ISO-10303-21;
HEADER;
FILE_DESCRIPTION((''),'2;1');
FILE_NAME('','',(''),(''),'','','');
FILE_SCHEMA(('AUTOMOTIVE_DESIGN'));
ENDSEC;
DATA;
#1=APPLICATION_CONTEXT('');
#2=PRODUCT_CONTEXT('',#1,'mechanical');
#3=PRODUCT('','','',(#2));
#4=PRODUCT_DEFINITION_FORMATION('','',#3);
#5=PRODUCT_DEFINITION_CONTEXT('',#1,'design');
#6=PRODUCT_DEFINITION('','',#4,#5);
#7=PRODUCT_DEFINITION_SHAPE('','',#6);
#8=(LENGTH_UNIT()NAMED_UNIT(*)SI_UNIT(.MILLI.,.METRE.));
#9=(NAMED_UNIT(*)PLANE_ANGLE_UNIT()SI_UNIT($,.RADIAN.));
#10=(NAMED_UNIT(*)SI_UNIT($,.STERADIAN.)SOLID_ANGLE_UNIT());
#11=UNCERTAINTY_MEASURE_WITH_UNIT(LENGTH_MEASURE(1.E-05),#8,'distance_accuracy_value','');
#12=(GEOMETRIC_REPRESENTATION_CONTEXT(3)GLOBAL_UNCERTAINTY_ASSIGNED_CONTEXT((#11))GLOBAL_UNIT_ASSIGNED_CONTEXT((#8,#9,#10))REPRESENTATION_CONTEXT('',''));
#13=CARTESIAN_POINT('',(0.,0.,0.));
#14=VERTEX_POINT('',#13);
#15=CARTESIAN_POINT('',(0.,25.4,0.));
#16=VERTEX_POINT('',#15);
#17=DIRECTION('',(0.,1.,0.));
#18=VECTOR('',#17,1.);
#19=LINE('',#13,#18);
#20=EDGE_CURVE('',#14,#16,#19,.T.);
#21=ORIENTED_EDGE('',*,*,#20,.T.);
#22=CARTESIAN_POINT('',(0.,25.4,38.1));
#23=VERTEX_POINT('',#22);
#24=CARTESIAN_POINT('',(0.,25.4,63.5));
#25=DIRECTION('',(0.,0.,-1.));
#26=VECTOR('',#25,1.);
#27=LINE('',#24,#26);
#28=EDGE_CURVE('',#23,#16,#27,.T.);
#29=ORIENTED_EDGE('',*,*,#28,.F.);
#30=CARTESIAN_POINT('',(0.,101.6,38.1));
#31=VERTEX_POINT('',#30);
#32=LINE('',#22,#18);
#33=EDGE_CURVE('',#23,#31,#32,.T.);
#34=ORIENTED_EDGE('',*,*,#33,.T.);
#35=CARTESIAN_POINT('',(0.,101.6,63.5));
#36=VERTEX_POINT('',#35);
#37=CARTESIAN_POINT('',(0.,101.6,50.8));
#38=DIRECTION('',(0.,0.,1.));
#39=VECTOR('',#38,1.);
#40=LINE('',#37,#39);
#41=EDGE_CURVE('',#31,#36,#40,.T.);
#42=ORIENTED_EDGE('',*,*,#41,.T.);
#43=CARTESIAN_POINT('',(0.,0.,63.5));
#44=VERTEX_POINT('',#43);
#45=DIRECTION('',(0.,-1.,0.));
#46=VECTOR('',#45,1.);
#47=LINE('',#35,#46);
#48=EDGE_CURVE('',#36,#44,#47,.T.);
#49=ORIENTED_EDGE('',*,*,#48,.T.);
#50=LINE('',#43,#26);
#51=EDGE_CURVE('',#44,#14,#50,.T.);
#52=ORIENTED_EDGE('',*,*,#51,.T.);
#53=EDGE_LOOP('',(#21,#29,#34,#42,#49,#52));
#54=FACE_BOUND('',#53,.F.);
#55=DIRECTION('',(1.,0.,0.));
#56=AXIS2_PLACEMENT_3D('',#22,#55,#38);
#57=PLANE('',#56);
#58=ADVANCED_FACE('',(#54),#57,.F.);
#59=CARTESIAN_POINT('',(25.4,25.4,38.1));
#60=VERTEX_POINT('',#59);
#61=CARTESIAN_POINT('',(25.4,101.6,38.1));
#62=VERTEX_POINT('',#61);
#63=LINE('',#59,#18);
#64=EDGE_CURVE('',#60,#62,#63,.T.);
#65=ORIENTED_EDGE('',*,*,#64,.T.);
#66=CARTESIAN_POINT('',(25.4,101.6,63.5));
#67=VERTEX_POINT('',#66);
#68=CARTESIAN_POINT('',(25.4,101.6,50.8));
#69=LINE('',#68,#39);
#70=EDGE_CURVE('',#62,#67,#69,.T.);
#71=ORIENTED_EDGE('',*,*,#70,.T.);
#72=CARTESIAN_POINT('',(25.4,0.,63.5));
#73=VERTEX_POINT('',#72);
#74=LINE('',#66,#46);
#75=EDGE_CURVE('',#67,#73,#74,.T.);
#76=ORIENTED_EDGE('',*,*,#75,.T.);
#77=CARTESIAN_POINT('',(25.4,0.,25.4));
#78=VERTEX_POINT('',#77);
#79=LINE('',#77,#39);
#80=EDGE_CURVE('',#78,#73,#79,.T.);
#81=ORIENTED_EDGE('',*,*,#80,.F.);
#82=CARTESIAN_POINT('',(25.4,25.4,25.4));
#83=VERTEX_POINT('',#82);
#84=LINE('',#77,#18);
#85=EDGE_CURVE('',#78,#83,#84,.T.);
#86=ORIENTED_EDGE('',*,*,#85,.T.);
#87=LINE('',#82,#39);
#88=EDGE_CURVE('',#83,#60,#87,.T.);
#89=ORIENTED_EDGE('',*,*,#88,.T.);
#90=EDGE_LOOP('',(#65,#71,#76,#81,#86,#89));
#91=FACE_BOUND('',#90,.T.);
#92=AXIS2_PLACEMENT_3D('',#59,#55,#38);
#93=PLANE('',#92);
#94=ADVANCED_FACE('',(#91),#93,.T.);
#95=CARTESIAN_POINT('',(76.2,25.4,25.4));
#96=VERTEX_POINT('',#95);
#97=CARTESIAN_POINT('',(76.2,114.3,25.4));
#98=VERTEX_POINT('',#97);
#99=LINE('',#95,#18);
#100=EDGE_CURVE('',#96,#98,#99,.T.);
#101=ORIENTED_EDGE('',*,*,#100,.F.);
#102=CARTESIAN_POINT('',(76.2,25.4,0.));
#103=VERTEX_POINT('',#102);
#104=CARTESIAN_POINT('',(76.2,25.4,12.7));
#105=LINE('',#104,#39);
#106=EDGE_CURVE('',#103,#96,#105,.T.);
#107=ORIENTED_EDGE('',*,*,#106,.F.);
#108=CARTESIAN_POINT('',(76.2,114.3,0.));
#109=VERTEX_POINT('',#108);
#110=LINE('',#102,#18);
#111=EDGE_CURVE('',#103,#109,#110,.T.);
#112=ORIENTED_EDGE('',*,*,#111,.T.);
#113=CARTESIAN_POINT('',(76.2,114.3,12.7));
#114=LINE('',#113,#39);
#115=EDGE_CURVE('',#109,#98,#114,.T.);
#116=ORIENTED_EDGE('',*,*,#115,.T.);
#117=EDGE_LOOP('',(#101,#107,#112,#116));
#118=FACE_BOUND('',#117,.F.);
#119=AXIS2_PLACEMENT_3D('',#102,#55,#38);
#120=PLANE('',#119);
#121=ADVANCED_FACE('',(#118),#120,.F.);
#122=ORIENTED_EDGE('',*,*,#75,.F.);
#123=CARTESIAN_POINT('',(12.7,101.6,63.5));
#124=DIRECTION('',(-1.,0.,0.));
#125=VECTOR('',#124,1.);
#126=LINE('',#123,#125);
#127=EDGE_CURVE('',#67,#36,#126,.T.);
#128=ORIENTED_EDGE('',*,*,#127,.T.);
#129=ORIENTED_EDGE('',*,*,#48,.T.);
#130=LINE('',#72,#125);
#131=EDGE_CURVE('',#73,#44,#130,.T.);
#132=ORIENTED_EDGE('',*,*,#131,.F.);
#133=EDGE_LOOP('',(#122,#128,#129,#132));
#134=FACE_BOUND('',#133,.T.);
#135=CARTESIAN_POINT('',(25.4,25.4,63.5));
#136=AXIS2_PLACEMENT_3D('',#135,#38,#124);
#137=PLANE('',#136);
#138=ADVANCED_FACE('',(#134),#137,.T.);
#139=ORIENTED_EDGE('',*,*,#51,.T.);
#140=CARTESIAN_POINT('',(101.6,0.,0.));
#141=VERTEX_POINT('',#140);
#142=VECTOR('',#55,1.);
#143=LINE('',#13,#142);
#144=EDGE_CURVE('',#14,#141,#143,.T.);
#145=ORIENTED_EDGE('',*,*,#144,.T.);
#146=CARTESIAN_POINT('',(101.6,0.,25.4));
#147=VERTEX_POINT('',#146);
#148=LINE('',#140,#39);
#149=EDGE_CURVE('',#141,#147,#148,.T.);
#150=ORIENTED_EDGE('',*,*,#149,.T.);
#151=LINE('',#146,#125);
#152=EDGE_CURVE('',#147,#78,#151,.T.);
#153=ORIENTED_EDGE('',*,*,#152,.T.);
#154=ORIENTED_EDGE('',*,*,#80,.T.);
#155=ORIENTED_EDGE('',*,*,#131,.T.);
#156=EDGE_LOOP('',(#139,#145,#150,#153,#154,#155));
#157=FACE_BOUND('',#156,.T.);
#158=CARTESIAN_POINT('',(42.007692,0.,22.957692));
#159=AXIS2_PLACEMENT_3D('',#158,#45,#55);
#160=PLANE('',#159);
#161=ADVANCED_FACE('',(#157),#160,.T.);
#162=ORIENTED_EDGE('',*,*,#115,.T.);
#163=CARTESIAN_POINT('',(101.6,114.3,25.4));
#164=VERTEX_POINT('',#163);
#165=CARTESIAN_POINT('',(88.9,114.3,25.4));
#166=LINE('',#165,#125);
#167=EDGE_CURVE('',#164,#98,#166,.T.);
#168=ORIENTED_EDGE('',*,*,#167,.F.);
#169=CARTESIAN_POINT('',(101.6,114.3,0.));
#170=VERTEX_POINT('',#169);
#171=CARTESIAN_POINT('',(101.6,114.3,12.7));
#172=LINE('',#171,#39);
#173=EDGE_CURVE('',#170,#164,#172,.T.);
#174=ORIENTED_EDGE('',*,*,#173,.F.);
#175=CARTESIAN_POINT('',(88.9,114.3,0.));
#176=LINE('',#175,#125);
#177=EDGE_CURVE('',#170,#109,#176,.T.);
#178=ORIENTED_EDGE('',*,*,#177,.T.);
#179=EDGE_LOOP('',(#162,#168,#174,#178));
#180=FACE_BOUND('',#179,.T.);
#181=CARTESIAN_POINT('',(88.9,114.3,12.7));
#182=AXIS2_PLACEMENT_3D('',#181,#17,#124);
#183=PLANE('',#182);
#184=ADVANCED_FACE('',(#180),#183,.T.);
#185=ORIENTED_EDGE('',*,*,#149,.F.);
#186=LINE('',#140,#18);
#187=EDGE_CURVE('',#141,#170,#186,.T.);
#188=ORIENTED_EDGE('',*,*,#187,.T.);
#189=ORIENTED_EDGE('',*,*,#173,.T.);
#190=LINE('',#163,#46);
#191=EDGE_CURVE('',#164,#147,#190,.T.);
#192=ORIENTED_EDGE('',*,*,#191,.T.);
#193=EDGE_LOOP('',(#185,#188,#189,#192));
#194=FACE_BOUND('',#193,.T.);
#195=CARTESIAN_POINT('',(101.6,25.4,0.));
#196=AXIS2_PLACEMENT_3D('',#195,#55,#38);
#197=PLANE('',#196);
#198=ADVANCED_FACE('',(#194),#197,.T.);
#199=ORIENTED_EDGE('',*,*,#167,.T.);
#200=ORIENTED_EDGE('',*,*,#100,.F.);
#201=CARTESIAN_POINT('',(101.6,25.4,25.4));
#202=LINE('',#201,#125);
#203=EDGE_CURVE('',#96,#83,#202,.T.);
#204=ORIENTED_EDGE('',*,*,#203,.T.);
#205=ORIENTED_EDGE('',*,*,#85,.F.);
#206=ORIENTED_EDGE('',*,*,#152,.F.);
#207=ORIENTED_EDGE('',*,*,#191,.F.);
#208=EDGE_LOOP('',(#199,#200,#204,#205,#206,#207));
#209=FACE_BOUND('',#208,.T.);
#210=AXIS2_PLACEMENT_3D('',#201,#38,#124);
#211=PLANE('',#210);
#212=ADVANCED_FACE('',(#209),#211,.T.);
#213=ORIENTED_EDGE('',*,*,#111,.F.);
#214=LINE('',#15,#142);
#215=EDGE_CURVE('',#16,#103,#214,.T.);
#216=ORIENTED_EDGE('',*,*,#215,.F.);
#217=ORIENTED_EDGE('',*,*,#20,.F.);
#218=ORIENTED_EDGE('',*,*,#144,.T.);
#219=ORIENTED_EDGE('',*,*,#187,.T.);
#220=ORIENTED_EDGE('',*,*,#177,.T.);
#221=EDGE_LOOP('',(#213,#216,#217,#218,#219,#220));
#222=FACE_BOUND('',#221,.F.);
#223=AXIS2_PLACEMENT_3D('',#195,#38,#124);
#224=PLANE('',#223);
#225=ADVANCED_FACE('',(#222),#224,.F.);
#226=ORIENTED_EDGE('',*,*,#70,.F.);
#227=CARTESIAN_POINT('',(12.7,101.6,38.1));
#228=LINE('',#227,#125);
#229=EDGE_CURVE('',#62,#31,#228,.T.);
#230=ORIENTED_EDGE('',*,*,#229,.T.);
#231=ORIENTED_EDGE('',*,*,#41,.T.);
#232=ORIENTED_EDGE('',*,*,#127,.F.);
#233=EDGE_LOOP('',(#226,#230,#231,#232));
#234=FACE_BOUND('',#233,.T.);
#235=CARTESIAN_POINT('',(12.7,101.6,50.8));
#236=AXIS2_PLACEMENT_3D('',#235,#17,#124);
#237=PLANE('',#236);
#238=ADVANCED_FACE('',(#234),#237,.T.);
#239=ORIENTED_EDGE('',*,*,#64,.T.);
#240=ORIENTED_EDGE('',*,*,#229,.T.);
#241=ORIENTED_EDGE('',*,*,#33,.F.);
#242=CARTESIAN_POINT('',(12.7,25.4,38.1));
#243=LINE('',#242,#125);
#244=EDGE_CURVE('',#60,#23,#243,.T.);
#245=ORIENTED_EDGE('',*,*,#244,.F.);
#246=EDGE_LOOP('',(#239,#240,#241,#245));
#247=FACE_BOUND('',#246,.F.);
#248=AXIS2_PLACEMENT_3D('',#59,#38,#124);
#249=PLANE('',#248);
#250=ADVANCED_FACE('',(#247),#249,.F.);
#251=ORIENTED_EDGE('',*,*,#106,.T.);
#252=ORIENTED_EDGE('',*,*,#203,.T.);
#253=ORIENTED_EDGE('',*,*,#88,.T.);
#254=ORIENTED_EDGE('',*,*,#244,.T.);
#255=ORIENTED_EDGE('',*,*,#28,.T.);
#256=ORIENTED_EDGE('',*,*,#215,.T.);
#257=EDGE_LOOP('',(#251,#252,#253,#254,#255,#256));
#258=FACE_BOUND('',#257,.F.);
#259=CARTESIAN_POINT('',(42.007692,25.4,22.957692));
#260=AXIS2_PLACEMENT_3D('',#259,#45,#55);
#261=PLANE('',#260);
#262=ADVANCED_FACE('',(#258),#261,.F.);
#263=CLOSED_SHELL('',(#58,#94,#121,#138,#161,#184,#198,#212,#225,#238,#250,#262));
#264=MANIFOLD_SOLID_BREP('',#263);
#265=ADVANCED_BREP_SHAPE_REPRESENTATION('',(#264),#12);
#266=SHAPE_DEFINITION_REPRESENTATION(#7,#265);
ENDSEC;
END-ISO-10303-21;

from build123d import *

# Parameters (mm, degrees)
F4_DEPTH = 25.4
F5_W     = 25.4
F5_H     = 25.4
F6_DEPTH = 76.2
F7_W     = 25.4
F7_H     = 25.4
F8_DEPTH = 88.9


# Not quite as in the source:
# - a variable given as a bare number and used for a length is read in inches; the dataset says mm whatever the document's units were


with BuildPart() as f4:
    # F3 (on Front) → F4 (new body)
    with BuildSketch(Plane.XZ):
        Polygon((0, 25.4), (0, 0), (25.4, 0), (101.6, 0), (101.6, 25.4), (25.4, 25.4), (25.4, 63.5), (0, 63.5), align=None)
    extrude(amount=-F4_DEPTH)

    # F5 (on face) → F6 (join)
    with BuildSketch(Plane(origin=(0, 25.4, 0), x_dir=(-1, 0, 0), z_dir=(0, 1, 0))):
        with Locations((-12.7, 50.8)):
            Rectangle(F5_W, F5_H)
    extrude(amount=F6_DEPTH)

    # F7 (on face) → F8 (join)
    with BuildSketch(Plane(origin=(0, 25.4, 0), x_dir=(-1, 0, 0), z_dir=(0, 1, 0))):
        with Locations((-88.9, 12.7)):
            Rectangle(F7_W, F7_H)
    extrude(amount=F8_DEPTH)


solid = f4.part
